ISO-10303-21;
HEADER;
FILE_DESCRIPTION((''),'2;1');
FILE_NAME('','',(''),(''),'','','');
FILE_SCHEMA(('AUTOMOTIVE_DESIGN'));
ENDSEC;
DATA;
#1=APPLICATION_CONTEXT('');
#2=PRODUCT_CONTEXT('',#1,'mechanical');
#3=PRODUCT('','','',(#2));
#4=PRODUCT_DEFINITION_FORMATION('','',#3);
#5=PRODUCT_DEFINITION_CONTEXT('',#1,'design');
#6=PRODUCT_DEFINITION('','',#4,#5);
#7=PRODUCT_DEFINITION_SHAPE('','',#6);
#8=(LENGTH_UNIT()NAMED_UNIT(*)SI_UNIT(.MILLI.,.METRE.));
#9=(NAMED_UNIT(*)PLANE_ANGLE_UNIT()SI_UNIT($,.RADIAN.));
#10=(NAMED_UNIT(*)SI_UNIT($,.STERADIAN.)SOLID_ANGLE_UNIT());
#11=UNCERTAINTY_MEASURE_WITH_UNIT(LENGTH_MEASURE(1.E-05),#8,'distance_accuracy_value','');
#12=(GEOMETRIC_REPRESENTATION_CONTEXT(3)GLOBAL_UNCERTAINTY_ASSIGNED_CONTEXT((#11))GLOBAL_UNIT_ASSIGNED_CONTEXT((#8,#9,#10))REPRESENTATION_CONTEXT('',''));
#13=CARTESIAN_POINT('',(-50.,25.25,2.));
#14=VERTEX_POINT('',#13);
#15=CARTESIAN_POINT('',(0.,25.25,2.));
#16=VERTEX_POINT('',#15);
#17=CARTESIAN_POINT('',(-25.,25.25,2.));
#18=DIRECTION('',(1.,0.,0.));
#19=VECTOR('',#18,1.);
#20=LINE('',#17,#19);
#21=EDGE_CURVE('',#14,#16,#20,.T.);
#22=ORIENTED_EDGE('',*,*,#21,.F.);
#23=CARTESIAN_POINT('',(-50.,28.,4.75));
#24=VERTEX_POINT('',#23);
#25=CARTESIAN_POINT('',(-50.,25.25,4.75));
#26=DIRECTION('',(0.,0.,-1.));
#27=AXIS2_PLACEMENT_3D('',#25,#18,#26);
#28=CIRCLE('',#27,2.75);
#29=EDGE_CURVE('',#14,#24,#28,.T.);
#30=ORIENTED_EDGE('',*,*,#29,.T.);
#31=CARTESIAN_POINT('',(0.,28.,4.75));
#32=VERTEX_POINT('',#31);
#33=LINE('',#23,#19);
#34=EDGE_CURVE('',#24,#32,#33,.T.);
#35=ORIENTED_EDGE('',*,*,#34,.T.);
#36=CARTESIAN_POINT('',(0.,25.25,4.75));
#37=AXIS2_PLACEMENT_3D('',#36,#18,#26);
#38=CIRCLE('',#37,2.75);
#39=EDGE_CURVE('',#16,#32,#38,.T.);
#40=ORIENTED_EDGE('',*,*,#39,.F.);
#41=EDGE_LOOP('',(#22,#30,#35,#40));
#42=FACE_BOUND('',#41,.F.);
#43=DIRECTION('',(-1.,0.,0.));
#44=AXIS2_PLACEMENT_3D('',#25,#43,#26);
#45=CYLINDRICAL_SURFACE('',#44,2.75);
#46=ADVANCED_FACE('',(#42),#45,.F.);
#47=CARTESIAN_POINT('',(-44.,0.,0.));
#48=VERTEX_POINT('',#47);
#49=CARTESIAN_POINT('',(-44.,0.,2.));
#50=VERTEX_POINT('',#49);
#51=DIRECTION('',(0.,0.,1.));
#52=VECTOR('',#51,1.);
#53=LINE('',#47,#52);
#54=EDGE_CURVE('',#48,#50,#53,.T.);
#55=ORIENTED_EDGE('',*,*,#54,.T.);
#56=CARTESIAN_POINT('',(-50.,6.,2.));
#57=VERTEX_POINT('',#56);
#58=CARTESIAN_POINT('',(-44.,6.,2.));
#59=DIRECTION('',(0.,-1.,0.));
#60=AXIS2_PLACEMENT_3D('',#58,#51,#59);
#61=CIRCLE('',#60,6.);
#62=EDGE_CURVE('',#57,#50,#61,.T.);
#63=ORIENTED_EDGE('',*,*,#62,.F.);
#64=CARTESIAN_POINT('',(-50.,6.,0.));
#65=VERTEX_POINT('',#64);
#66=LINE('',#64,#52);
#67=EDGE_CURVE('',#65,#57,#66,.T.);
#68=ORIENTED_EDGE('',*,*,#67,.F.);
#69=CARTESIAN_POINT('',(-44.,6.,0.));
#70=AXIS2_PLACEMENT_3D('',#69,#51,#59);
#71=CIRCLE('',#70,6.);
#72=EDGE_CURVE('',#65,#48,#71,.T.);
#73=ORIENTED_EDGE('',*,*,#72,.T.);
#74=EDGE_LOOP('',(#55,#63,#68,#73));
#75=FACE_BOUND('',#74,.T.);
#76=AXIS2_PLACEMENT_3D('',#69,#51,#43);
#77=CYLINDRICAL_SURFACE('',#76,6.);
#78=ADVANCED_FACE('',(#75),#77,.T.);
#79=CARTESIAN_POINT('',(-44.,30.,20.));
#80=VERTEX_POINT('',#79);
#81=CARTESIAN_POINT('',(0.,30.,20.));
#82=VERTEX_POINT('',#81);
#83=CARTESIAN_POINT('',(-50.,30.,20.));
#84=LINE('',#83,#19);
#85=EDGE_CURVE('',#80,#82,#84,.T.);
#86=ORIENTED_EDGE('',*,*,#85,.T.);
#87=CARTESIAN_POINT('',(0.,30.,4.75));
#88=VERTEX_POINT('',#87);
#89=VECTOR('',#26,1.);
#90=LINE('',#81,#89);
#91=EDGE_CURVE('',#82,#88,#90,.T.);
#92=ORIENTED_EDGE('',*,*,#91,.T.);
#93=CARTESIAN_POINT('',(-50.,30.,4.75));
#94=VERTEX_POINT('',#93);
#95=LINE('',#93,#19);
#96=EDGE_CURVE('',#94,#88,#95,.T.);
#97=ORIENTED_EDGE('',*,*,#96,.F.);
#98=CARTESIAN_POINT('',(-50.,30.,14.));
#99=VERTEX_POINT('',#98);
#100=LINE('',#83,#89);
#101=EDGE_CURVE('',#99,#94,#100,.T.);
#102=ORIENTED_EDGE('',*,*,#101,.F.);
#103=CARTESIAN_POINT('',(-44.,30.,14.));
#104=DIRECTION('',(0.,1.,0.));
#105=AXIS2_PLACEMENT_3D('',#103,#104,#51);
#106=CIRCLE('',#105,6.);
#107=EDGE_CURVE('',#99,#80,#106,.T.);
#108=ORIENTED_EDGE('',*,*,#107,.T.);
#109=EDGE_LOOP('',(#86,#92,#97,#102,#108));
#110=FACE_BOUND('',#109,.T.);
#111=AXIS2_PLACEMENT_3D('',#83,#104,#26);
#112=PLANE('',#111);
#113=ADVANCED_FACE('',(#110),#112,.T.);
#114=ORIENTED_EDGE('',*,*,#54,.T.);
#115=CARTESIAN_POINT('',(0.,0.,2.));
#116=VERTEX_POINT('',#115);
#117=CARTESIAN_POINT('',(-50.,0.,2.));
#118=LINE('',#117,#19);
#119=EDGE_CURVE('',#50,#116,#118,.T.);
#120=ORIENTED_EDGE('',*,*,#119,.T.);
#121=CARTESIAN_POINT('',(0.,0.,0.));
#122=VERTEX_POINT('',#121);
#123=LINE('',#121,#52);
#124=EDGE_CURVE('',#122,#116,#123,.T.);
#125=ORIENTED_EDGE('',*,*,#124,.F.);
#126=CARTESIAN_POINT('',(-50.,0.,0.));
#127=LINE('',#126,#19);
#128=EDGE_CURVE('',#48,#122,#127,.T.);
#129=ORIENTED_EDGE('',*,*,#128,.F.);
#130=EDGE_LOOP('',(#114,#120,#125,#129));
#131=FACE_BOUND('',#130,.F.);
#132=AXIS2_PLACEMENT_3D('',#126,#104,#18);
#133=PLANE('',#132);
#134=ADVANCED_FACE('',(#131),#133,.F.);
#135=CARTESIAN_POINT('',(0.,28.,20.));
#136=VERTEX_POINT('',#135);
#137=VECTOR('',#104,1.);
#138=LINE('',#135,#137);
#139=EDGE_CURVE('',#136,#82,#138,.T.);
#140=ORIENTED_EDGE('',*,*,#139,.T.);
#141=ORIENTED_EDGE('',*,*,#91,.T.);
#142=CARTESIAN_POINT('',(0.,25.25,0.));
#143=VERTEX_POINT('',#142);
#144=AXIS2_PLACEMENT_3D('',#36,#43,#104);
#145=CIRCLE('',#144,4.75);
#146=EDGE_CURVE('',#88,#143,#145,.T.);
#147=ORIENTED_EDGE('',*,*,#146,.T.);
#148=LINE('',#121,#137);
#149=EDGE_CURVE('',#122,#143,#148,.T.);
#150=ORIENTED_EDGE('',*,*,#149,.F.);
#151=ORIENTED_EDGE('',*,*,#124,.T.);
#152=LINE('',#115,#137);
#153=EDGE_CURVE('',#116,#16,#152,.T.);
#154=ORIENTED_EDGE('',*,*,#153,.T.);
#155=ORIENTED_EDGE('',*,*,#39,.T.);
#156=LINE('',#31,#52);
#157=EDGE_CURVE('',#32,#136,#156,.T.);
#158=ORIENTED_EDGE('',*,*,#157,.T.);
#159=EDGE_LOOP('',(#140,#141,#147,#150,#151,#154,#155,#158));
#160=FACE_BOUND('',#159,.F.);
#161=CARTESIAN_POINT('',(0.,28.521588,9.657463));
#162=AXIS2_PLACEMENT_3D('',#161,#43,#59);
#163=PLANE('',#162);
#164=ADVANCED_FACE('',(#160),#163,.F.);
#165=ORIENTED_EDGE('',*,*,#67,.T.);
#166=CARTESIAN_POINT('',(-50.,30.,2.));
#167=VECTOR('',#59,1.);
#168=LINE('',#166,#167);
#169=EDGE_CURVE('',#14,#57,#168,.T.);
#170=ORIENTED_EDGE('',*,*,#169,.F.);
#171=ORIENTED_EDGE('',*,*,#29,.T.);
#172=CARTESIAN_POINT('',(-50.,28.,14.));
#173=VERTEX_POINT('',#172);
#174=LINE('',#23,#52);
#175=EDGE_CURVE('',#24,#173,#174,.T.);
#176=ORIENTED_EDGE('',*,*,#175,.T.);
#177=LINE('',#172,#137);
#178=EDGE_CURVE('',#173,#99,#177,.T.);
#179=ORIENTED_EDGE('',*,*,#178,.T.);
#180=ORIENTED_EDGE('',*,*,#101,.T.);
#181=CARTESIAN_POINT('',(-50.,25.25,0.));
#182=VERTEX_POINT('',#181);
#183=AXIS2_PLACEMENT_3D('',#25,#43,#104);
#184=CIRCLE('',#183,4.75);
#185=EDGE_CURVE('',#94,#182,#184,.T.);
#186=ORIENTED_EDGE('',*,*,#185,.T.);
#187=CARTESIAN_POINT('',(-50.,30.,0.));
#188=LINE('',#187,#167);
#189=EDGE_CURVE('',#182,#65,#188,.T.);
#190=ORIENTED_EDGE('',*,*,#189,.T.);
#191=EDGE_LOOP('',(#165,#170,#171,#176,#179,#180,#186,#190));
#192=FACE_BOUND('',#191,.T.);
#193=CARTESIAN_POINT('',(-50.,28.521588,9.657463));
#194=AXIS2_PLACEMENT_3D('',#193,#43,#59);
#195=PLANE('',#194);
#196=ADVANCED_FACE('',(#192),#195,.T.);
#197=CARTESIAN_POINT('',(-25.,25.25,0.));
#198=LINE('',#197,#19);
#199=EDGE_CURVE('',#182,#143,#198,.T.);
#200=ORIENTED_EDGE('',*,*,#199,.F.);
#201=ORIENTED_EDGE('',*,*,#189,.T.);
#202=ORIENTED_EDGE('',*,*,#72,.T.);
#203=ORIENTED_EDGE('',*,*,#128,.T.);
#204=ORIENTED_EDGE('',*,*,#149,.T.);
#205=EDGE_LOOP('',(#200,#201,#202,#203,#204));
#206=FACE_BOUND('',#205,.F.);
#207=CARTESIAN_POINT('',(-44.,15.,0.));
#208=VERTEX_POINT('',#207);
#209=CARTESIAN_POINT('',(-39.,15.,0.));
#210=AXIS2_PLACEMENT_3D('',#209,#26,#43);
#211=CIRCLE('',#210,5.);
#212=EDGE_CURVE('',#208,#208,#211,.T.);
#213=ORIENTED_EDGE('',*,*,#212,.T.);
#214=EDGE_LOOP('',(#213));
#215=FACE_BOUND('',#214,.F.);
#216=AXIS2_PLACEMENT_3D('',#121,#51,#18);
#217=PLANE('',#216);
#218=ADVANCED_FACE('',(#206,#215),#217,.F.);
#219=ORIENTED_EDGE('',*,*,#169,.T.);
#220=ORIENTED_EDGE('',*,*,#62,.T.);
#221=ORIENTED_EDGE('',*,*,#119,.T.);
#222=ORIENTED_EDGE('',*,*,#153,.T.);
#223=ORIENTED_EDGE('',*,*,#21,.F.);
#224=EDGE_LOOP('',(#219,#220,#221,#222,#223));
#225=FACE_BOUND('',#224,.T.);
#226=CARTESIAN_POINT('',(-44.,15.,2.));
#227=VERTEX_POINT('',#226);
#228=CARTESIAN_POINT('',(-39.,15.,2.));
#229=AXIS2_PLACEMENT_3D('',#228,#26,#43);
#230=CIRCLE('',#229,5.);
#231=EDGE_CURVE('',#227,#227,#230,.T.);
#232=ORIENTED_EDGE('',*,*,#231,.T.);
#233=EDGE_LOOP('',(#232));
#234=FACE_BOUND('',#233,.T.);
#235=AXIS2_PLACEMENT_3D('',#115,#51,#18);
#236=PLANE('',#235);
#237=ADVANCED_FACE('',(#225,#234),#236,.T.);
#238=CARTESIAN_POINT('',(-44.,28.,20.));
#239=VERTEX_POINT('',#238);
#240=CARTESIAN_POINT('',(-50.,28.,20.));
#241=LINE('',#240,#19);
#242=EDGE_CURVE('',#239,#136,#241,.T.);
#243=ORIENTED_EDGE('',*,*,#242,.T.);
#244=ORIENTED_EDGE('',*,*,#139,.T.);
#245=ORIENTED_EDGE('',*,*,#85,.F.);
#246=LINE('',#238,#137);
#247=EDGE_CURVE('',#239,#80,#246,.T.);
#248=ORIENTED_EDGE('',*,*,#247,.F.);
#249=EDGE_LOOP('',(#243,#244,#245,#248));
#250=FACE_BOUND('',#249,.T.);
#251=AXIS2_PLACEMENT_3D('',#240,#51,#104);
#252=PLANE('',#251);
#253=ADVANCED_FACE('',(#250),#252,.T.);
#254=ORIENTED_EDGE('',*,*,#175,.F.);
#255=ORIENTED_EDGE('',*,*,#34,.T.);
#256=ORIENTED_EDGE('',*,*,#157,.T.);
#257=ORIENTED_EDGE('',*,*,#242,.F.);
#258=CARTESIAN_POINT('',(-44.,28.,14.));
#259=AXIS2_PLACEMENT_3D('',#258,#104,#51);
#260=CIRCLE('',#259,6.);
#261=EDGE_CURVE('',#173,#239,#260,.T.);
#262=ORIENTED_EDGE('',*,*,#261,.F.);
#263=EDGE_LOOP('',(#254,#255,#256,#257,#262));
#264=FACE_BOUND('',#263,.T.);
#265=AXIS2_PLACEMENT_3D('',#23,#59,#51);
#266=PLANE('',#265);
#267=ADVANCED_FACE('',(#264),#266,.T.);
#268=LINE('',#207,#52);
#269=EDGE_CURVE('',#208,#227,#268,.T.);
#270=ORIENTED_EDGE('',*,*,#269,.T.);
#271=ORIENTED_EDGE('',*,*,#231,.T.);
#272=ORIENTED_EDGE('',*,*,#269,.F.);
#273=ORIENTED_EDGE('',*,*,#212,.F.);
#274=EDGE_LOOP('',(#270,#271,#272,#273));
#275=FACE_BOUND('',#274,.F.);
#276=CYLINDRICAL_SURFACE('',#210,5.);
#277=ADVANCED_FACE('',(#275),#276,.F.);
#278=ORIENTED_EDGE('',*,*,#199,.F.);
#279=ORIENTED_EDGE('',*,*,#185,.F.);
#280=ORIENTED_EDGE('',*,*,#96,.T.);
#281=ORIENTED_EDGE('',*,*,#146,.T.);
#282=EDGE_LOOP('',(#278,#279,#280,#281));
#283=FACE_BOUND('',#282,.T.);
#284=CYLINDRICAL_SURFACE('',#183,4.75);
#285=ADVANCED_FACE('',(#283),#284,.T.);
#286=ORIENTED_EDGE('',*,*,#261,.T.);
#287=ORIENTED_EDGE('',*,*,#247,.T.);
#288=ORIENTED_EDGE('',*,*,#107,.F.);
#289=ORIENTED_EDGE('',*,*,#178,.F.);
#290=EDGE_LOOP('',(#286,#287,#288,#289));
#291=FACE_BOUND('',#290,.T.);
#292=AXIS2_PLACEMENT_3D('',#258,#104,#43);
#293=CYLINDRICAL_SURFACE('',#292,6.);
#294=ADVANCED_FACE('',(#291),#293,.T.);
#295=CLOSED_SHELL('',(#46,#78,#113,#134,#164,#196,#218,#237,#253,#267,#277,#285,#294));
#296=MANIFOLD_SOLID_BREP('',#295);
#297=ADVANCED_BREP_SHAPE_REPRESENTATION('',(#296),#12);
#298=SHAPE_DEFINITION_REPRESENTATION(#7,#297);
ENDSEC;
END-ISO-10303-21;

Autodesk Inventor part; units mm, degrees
ref_plane "YZ Plane" through (0, 0, 0) normal (1, 0, 0) x (0, 1, 0)
ref_plane "XZ Plane" through (0, 0, 0) normal (0, 1, 0) x (-1, 0, 0)
ref_plane "XY Plane" through (0, 0, 0) normal (0, 0, 1) x (1, 0, 0)
sketch "Sketch2" plane through (0, 0, 0) normal (0, 0, 1) x (1, 0, 0)
  line L0 (0, 0) -> (0, 30)
  line L1 (0, 30) -> (-50, 30)
  line L2 (-50, 30) -> (-50, 0)
  line L3 (-50, 0) -> (0, 0)
  dimension "d10" = 30
  dimension "d30" = 50
extrude "Plate1" add sketch "Sketch2" along normal blind 2
sketch "Sketch3" plane through (-50, 28, 0) normal (0, 1, 0) x (-1, 0, 0)
  line L0 (-50, 0) -> (0, 0)
  line L1 (0, 0) -> (0, 20)
  line L2 (0, 20) -> (-50, 20)
  line L3 (-50, 20) -> (-50, 0)
edge flange "Flange1" height 20 angle 90 thickness 2 bend radius 2.75 thickness toward (0, 1, 0) relief round relief width 2 relief depth 1 edges at (-25, 30, 2) wall of the first edge with corners at (0, 28, 0) (-50, 28, 0) (-50, 28, 20) (0, 28, 20)
bend "Bend1"
corner "Corner1"
fillet "Corner Round1" radius 6 2 edges at (-50, 0, 1) (-50, 29, 20)
sketch "Sketch4" plane through (0, 0, 0) normal (0, 0, -1) x (-1, 0, 0)
  circle A0 centre (39, 15) radius 5
  line L0 (44, 0) -> (0, 0) projected
  dimension "d25" = 10
  dimension "d26" = 15
  dimension "d27" = 5
extrude "Cut1" cut sketch "Sketch4" against normal blind 2
equation "\"d28\" = Thickness"
equation "\"d7\" = Thickness"
equation "\"d14\" = BendReliefWidth"
equation "\"d15\" = BendReliefDepth"
equation "\"d16\" = MinimumRemnant"
equation "\"d17\" = TransitionRadius"
equation "\"d20\" = BendRadius"
equation "\"d21\" = CornerReliefSize"
equation "\"d22\" = GapSize"
equation "\"d23\" = JacobiRadiusSize"
equation "\"BendReliefWidth\" = Thickness"
equation "\"BendReliefDepth\" = 0.5 * Thickness"
equation "\"CornerReliefSize\" = 4 * Thickness"
equation "\"MinimumRemnant\" = 2 * Thickness"
equation "\"TransitionRadius\" = BendRadius"
equation "\"JacobiRadiusSize\" = BendRadius"
equation "\"GapSize\" = Thickness"
equation "\"Thickness\" = 2"
equation "\"BendRadius\" = 2.75"
properties part number "MSC 124 ROСKET PILLAR" material "Stainless Steel"
